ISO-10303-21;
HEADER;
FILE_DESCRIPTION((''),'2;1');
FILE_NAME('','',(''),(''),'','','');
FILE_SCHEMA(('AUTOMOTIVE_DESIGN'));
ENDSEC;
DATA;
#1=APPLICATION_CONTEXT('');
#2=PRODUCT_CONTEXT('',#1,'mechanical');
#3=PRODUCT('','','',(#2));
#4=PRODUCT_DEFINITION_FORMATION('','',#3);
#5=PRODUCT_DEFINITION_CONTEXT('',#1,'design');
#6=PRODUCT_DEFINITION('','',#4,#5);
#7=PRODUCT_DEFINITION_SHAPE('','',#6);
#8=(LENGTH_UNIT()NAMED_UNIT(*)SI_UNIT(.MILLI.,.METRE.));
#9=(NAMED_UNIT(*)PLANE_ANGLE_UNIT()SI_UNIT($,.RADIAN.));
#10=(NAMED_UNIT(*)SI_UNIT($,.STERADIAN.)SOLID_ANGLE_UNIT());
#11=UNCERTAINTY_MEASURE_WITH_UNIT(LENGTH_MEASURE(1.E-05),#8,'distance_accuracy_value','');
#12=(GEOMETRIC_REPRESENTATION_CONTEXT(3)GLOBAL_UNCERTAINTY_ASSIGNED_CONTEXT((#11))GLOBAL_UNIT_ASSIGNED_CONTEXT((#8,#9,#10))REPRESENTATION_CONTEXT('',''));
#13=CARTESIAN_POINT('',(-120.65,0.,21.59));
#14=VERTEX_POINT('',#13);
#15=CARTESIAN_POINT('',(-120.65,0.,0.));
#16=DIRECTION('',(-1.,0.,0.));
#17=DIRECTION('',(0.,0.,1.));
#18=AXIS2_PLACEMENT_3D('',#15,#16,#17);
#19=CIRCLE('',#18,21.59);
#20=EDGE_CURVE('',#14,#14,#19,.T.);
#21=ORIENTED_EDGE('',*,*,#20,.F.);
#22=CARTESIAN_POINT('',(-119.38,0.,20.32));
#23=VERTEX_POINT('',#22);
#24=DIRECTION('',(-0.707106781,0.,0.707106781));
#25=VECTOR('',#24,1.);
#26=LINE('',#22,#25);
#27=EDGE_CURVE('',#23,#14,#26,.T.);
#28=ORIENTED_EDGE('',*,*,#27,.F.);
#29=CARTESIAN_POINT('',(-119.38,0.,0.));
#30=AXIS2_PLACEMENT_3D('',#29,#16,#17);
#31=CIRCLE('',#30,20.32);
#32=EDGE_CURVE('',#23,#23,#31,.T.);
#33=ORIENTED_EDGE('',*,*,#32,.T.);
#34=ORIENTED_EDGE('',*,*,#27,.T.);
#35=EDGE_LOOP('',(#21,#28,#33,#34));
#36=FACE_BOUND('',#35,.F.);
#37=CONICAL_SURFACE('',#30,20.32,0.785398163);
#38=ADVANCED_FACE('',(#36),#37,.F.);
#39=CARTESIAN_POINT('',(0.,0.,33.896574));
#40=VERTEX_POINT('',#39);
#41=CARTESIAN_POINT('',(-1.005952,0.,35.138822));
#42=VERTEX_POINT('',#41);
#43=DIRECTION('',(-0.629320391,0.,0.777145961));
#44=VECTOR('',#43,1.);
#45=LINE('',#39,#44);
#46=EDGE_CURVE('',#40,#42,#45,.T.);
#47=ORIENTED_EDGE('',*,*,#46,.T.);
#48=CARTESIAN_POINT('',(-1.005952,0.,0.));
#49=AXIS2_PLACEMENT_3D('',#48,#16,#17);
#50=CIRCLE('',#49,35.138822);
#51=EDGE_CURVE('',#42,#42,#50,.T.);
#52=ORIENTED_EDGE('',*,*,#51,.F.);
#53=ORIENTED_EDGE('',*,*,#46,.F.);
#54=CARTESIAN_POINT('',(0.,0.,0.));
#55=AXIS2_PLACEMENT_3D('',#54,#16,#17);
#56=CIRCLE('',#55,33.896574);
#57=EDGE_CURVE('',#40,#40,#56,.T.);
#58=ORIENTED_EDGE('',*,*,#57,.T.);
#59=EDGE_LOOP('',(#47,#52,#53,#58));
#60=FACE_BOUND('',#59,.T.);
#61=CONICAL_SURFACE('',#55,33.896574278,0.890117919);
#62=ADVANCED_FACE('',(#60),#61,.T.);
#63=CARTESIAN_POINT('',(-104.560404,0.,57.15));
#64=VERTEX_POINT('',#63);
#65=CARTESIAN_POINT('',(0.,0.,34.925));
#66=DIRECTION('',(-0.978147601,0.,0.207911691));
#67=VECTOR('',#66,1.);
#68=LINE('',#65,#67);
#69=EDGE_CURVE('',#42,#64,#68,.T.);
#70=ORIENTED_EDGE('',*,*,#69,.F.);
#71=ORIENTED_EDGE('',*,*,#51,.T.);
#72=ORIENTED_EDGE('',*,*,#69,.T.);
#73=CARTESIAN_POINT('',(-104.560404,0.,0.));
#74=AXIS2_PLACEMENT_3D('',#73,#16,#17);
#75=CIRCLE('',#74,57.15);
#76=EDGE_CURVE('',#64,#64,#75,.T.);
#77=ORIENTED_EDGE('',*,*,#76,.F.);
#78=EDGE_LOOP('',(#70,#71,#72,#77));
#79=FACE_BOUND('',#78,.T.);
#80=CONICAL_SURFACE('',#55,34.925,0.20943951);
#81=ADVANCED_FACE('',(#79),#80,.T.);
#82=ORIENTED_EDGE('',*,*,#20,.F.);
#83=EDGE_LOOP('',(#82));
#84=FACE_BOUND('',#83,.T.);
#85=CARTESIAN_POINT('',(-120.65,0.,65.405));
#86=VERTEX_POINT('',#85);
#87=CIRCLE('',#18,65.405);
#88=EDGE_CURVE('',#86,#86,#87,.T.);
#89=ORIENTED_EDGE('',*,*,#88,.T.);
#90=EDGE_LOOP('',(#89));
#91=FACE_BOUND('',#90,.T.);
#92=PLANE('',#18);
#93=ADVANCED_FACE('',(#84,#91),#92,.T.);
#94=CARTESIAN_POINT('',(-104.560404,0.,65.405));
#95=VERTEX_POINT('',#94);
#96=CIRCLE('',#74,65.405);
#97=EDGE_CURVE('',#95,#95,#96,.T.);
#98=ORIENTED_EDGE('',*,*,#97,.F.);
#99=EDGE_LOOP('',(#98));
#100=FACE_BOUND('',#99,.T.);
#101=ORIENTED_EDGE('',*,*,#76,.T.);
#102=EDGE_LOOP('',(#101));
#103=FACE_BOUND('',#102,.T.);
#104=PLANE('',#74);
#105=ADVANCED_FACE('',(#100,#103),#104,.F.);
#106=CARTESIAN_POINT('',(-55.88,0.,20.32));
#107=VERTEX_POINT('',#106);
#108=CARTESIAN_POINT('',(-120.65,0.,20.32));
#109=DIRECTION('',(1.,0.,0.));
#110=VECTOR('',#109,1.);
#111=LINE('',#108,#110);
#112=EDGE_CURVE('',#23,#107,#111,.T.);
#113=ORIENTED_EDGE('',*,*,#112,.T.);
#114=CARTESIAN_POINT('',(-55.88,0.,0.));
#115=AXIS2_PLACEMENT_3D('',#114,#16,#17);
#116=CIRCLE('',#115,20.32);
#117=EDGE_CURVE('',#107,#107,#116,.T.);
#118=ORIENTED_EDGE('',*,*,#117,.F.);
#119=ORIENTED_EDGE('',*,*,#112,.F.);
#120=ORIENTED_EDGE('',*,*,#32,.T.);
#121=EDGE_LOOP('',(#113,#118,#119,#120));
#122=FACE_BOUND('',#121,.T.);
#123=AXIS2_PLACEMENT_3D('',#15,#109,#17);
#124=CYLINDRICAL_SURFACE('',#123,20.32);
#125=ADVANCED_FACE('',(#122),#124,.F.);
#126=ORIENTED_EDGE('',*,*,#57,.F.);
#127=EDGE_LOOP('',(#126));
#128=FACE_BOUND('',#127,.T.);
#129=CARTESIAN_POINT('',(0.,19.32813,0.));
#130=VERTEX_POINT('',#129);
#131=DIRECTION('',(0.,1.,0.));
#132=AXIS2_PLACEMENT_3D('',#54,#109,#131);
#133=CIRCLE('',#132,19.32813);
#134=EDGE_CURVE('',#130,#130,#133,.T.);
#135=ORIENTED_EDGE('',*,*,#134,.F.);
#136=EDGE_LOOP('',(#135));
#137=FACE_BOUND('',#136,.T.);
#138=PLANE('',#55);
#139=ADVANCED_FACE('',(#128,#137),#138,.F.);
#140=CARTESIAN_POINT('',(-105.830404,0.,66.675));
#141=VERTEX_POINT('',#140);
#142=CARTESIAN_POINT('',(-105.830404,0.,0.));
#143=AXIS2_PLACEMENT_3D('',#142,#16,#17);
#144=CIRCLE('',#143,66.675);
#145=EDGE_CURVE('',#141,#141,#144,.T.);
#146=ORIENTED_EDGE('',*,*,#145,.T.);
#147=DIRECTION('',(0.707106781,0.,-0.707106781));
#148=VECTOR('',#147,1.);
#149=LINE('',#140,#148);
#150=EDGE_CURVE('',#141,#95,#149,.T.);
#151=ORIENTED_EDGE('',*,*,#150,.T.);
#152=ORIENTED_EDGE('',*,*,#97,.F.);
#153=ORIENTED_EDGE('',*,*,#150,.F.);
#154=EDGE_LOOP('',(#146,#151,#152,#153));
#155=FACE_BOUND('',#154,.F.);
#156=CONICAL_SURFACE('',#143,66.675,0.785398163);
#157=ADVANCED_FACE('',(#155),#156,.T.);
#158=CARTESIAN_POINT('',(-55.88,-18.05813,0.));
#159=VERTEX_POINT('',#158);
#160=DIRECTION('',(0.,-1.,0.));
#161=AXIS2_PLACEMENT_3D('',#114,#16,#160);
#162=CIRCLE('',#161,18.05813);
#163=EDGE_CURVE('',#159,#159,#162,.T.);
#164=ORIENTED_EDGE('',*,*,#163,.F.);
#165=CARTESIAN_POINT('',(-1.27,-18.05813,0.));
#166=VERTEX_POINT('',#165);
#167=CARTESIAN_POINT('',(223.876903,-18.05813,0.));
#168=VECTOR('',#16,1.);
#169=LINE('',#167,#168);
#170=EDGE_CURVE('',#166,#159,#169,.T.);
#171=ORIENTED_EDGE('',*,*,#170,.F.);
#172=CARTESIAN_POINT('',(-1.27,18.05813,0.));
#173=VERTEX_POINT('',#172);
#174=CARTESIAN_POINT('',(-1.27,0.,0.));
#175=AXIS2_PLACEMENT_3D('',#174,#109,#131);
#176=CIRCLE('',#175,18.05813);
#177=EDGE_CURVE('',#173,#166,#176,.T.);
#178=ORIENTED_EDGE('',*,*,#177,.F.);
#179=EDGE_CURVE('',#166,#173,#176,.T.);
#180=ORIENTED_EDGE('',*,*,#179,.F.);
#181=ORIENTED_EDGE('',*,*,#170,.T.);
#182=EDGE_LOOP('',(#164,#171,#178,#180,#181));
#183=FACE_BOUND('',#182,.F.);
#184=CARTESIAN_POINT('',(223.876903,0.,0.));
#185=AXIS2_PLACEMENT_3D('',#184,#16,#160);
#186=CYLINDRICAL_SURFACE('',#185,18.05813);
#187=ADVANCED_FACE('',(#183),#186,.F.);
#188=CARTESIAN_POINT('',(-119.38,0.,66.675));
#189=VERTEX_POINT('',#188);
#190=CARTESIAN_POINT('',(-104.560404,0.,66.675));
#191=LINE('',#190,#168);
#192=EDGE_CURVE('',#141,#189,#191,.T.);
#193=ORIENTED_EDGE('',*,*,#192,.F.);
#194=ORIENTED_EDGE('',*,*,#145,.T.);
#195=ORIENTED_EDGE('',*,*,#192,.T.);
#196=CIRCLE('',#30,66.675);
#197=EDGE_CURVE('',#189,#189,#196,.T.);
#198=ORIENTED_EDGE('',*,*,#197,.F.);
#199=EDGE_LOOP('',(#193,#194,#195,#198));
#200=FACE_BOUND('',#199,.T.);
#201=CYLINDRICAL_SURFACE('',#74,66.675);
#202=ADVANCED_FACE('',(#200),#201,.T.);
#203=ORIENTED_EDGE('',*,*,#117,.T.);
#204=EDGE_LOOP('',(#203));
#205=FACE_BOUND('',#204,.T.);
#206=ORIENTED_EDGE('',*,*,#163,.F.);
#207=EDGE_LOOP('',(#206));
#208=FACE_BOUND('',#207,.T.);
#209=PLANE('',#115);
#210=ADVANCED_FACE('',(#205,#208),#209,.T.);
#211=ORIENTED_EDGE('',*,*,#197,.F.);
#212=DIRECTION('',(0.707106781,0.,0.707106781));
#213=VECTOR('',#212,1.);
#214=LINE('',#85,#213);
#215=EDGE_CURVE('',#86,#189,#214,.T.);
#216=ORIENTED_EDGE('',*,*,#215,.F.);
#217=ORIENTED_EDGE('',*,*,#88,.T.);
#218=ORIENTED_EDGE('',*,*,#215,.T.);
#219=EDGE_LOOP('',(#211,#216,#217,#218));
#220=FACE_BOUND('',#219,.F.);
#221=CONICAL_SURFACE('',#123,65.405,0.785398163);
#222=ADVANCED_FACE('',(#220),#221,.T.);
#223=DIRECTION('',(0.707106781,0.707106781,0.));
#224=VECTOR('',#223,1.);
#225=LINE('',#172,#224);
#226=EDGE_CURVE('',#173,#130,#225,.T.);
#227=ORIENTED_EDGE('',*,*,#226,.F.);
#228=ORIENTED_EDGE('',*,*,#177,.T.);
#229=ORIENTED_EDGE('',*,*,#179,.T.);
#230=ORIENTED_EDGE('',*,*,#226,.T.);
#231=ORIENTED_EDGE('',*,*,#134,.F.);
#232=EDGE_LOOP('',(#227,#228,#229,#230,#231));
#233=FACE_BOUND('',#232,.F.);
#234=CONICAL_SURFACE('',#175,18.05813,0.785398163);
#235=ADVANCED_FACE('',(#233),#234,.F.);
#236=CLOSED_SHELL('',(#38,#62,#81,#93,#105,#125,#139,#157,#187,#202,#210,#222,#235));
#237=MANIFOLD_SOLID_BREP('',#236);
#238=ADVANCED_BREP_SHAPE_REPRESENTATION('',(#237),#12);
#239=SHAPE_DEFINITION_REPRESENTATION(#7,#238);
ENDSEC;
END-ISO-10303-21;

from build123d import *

# Parameters (mm, degrees)
F3_D = 36.11626


# Not quite as in the source:
# - a fillet or chamfer that OpenCascade refuses, or shapes differently, is made with other operations: its cross-section is extruded or revolved along the edge and cut away or added


with BuildPart() as f1:
    # F0 (on Front) → F1 (revolve)
    with BuildSketch(Plane.XZ):
        Polygon((0, 0), (0, 34.925), (-104.5604041832, 57.15), (-104.5604041832, 66.675), (-120.65, 66.675), (-120.65, 20.32), (-55.88, 20.32), (-55.88, 0), align=None)
    revolve(axis=Axis((-55.6578852736, 0, 0), (-1, 0, 0)))

    # F3 (through all)
    with Locations(Plane.YZ):
        with Locations((0, 0)):
            Hole(F3_D / 2)

    # F4: chamfer of 1.27 on 5 edges, made by hand

    # F4_s1 → F4_t2 (revolve, cut)
    with BuildSketch(Plane.XZ):
        Polygon((-120.65, 65.405), (-119.38, 66.675), (-120.65, 66.675), align=None)
    revolve(axis=Axis((-120.65, 0, 0), (-1, 0, 0)), mode=Mode.SUBTRACT)

    # F4_s3 → F4_t4 (revolve, cut)
    with BuildSketch(Plane.XZ):
        Polygon((-119.38, 20.32), (-120.65, 21.59), (-120.65, 20.32), align=None)
    revolve(axis=Axis((-120.65, 0, 0), (-1, 0, 0)), mode=Mode.SUBTRACT)

    # F4_s5 → F4_t6 (revolve, cut)
    with BuildSketch(Plane.XZ):
        Polygon((-105.8304041832, 66.675), (-104.5604041832, 65.405), (-104.5604041832, 66.675), align=None)
    revolve(axis=Axis((-104.5604041832, 0, 0), (-1, 0, 0)), mode=Mode.SUBTRACT)

    # F4_s7 → F4_t8 (revolve, cut)
    with BuildSketch(Plane.XZ):
        Polygon((0, 33.8965742778), (-1.0059521527, 35.1388217308), (0, 34.925), align=None)
    revolve(axis=Axis((0, 0, 0), (-1, 0, 0)), mode=Mode.SUBTRACT)

    # F4_s9 → F4_t10 (revolve, cut)
    with BuildSketch(Plane.XY):
        Polygon((-1.27, 18.05813), (0, 19.32813), (0, 18.05813), align=None)
    revolve(axis=Axis((0, 0, 0), (1, 0, 0)), mode=Mode.SUBTRACT)


solid = f1.part
